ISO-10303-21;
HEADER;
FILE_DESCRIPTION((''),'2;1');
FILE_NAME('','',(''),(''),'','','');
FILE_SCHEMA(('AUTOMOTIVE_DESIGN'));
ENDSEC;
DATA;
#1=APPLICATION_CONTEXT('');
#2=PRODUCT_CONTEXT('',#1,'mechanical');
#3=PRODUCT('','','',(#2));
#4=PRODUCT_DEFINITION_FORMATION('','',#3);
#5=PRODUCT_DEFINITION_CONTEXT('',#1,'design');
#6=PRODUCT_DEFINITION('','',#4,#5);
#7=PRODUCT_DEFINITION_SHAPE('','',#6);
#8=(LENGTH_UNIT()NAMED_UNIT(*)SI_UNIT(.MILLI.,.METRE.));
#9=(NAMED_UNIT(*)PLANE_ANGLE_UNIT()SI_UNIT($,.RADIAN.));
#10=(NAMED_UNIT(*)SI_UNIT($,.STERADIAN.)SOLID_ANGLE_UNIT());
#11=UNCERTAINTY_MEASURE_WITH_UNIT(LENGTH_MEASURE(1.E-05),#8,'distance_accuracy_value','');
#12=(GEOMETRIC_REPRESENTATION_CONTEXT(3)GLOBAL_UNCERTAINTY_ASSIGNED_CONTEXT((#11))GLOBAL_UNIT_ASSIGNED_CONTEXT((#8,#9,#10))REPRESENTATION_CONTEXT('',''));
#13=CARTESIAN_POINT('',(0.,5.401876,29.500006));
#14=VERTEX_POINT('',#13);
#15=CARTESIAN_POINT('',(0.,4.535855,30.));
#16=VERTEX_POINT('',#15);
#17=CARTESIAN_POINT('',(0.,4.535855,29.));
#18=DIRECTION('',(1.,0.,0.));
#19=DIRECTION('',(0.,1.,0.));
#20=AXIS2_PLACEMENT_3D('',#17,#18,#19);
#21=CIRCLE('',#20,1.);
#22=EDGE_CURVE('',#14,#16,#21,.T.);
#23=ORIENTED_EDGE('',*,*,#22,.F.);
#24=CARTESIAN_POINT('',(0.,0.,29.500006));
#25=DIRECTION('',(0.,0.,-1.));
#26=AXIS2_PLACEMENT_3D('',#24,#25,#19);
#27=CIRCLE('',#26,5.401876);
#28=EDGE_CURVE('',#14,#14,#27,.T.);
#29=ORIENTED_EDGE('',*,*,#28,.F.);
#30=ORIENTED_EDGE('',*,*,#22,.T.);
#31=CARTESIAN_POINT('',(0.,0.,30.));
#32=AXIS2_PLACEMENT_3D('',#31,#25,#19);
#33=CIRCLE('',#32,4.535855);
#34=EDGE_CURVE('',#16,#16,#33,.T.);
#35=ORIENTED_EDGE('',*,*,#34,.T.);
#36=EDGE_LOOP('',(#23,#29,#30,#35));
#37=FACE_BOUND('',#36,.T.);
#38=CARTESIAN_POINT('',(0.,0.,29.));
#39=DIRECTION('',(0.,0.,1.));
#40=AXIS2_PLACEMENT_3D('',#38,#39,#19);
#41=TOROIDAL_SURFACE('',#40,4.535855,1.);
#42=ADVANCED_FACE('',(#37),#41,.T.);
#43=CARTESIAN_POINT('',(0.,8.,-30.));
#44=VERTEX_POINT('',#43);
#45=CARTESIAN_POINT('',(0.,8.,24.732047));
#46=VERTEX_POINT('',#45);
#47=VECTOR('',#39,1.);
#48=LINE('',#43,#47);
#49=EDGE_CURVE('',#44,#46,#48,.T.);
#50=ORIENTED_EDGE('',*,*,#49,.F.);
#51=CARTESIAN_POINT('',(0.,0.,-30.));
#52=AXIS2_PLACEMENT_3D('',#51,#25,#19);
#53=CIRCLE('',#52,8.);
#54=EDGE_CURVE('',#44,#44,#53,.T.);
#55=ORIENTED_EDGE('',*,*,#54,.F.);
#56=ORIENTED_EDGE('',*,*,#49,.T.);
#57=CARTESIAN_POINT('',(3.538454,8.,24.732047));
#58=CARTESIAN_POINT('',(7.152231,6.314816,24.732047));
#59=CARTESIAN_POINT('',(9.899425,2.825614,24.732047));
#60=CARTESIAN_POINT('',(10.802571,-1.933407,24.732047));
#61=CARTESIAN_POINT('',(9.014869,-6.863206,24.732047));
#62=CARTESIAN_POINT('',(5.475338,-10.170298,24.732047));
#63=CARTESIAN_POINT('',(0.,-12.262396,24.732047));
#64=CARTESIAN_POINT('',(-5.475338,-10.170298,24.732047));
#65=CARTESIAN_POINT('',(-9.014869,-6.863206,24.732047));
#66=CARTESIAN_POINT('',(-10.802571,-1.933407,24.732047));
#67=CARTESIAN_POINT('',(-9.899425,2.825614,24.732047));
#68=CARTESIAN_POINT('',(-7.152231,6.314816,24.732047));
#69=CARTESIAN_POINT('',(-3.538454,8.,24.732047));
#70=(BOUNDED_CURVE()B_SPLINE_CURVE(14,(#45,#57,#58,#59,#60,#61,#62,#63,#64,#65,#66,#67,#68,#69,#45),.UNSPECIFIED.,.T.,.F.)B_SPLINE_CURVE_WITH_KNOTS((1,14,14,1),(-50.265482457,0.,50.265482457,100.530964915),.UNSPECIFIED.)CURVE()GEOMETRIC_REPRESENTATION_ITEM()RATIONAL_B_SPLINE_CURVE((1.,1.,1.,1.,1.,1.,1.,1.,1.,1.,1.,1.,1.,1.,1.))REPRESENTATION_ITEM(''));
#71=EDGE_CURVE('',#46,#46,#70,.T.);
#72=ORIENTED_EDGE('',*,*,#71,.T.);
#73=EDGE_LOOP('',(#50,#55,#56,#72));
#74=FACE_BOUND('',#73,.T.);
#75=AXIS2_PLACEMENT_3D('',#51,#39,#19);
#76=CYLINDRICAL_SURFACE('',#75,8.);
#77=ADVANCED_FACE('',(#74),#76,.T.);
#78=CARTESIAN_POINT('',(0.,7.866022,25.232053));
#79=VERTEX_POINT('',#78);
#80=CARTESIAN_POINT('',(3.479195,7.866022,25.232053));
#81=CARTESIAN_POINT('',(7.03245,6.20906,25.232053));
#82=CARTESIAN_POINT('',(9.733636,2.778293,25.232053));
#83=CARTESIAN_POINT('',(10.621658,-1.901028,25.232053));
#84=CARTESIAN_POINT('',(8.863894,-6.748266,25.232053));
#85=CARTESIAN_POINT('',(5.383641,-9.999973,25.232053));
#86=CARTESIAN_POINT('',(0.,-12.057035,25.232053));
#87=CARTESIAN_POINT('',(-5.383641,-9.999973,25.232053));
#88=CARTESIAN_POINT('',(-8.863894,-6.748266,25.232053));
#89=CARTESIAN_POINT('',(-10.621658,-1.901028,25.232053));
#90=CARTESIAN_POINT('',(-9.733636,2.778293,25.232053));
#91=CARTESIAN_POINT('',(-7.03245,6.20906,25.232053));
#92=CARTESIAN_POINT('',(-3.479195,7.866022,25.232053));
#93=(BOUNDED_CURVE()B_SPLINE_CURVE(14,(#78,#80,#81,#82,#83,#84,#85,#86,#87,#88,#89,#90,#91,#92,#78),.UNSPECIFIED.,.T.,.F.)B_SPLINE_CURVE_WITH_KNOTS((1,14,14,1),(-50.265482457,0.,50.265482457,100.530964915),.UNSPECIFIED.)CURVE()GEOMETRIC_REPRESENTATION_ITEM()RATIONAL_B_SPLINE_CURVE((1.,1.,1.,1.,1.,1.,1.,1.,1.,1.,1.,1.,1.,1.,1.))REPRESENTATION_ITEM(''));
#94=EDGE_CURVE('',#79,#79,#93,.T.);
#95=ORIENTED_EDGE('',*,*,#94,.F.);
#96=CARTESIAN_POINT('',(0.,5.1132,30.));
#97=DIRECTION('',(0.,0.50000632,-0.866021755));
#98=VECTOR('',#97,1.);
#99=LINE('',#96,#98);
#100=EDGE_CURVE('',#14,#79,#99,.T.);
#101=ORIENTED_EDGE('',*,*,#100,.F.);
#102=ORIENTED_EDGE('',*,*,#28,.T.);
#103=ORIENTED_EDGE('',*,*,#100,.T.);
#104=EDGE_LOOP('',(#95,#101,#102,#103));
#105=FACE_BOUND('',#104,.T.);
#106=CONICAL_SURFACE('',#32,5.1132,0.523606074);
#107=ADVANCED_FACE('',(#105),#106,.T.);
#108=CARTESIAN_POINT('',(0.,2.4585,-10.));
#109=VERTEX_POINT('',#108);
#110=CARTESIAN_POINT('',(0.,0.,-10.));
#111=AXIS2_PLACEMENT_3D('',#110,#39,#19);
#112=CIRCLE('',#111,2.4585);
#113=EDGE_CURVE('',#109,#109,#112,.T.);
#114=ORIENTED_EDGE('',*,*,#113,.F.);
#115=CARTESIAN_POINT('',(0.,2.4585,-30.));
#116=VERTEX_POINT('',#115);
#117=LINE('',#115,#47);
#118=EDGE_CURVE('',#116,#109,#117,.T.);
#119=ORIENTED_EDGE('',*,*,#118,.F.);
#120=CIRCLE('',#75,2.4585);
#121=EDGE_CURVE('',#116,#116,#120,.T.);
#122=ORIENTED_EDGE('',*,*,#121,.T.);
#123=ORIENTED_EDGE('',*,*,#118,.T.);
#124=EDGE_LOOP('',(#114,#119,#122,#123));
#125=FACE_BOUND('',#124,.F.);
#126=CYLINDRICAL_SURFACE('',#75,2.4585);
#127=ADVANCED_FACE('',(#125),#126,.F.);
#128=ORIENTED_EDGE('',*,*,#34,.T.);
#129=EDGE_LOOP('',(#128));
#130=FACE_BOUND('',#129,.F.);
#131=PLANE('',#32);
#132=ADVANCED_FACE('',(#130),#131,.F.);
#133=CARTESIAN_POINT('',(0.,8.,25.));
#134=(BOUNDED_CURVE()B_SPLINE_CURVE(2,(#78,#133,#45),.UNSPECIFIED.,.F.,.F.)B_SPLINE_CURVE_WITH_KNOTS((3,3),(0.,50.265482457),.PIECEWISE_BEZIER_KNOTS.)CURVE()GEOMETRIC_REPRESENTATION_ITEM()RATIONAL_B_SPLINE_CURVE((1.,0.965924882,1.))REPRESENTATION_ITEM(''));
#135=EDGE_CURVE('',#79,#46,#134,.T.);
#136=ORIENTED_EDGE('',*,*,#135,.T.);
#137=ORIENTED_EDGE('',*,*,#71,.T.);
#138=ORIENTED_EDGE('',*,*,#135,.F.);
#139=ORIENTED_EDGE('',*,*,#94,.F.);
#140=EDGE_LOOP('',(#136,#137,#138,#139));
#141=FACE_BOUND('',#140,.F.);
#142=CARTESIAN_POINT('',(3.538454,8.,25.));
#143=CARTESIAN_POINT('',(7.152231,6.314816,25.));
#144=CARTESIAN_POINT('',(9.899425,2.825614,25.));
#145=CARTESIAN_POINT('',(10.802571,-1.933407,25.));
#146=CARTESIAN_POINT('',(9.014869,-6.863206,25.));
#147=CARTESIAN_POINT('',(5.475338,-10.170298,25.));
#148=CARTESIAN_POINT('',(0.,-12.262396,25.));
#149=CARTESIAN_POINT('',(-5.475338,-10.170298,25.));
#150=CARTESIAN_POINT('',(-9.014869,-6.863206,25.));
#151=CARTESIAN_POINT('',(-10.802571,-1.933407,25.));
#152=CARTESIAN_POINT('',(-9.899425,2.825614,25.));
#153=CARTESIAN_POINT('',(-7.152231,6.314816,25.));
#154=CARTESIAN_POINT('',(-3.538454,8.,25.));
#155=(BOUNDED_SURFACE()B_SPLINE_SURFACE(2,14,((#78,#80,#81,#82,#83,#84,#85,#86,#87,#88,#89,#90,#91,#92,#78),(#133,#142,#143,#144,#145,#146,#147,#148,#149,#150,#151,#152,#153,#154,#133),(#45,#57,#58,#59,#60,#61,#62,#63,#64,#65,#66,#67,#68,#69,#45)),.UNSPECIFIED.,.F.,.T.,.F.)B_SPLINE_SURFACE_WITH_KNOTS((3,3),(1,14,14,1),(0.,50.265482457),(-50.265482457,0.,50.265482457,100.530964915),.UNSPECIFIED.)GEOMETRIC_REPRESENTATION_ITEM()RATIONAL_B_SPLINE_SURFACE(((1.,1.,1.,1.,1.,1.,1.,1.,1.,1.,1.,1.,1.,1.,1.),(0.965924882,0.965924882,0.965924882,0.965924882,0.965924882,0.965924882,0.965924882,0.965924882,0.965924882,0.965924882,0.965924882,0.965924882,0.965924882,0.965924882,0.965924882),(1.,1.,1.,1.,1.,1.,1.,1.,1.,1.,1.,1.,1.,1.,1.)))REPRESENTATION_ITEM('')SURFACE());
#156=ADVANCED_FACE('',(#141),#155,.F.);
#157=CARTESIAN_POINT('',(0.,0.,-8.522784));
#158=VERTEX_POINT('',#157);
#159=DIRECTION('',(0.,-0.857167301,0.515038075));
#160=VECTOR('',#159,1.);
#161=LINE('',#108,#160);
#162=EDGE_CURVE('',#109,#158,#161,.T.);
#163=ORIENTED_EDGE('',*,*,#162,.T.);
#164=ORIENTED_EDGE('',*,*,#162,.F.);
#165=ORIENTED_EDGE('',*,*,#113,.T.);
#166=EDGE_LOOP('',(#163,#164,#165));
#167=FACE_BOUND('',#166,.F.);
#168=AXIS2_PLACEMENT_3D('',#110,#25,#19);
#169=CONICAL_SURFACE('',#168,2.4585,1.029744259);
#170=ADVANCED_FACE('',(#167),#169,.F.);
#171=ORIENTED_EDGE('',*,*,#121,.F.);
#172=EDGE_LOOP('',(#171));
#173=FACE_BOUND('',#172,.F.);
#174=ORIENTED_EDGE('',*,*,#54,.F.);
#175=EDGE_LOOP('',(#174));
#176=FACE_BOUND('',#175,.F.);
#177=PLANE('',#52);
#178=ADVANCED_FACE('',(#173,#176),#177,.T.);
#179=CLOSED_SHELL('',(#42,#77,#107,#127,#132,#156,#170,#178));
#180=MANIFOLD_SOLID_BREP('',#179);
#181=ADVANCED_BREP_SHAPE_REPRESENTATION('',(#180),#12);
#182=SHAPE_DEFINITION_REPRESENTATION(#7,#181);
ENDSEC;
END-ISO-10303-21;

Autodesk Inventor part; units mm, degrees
ref_plane "YZ Plane" through (0, 0, 0) normal (1, 0, 0) x (0, 1, 0)
ref_plane "XZ Plane" through (0, 0, 0) normal (0, 1, 0) x (-1, 0, 0)
ref_plane "XY Plane" through (0, 0, 0) normal (0, 0, 1) x (1, 0, 0)
sketch "Esboço1" plane through (0, 0, 0) normal (1, 0, 0) x (0, 1, 0)
  line L0 (-1.6, 0) -> (9.6, 0) construction
  line L1 (0, -42) -> (0, 42) construction
  line L2 (8, 30) -> (0, 30)
  line L3 (0, 30) -> (0, -30)
  line L4 (0, -30) -> (8, -30)
  line L5 (8, -30) -> (8, 30)
  line L6 (5.1132, 30) -> (8, 25)
  point P0 (0, 0)
  dimension "d0" = 16
  dimension "d1" = 60
  dimension "d2" = 5
  dimension "d3" = 30
revolve "Revolução1" add sketch "Esboço1" angle 360 about axis through (0, 0, 30) along (0, 0, -1) contours L6 L5 L4 L3 L2
fillet "Arredondamento1" radius 1 2 edges at (0, -5.1132, 30) (0, -8, 25)
sketch "Esboço2" plane through (0, 0, -30) normal (0, 0, -1) x (-1, 0, 0)
  circle A0 centre (0, 0) radius 8 projected
hole "Furo1" at (0, 0, -30) direction (0, 0, 1) diameter 4.917 depth 20 tip angle 118 thread size "M6x1" class "6H" standard "ISO Metric profile"
properties material "Aço SAE 1045"
